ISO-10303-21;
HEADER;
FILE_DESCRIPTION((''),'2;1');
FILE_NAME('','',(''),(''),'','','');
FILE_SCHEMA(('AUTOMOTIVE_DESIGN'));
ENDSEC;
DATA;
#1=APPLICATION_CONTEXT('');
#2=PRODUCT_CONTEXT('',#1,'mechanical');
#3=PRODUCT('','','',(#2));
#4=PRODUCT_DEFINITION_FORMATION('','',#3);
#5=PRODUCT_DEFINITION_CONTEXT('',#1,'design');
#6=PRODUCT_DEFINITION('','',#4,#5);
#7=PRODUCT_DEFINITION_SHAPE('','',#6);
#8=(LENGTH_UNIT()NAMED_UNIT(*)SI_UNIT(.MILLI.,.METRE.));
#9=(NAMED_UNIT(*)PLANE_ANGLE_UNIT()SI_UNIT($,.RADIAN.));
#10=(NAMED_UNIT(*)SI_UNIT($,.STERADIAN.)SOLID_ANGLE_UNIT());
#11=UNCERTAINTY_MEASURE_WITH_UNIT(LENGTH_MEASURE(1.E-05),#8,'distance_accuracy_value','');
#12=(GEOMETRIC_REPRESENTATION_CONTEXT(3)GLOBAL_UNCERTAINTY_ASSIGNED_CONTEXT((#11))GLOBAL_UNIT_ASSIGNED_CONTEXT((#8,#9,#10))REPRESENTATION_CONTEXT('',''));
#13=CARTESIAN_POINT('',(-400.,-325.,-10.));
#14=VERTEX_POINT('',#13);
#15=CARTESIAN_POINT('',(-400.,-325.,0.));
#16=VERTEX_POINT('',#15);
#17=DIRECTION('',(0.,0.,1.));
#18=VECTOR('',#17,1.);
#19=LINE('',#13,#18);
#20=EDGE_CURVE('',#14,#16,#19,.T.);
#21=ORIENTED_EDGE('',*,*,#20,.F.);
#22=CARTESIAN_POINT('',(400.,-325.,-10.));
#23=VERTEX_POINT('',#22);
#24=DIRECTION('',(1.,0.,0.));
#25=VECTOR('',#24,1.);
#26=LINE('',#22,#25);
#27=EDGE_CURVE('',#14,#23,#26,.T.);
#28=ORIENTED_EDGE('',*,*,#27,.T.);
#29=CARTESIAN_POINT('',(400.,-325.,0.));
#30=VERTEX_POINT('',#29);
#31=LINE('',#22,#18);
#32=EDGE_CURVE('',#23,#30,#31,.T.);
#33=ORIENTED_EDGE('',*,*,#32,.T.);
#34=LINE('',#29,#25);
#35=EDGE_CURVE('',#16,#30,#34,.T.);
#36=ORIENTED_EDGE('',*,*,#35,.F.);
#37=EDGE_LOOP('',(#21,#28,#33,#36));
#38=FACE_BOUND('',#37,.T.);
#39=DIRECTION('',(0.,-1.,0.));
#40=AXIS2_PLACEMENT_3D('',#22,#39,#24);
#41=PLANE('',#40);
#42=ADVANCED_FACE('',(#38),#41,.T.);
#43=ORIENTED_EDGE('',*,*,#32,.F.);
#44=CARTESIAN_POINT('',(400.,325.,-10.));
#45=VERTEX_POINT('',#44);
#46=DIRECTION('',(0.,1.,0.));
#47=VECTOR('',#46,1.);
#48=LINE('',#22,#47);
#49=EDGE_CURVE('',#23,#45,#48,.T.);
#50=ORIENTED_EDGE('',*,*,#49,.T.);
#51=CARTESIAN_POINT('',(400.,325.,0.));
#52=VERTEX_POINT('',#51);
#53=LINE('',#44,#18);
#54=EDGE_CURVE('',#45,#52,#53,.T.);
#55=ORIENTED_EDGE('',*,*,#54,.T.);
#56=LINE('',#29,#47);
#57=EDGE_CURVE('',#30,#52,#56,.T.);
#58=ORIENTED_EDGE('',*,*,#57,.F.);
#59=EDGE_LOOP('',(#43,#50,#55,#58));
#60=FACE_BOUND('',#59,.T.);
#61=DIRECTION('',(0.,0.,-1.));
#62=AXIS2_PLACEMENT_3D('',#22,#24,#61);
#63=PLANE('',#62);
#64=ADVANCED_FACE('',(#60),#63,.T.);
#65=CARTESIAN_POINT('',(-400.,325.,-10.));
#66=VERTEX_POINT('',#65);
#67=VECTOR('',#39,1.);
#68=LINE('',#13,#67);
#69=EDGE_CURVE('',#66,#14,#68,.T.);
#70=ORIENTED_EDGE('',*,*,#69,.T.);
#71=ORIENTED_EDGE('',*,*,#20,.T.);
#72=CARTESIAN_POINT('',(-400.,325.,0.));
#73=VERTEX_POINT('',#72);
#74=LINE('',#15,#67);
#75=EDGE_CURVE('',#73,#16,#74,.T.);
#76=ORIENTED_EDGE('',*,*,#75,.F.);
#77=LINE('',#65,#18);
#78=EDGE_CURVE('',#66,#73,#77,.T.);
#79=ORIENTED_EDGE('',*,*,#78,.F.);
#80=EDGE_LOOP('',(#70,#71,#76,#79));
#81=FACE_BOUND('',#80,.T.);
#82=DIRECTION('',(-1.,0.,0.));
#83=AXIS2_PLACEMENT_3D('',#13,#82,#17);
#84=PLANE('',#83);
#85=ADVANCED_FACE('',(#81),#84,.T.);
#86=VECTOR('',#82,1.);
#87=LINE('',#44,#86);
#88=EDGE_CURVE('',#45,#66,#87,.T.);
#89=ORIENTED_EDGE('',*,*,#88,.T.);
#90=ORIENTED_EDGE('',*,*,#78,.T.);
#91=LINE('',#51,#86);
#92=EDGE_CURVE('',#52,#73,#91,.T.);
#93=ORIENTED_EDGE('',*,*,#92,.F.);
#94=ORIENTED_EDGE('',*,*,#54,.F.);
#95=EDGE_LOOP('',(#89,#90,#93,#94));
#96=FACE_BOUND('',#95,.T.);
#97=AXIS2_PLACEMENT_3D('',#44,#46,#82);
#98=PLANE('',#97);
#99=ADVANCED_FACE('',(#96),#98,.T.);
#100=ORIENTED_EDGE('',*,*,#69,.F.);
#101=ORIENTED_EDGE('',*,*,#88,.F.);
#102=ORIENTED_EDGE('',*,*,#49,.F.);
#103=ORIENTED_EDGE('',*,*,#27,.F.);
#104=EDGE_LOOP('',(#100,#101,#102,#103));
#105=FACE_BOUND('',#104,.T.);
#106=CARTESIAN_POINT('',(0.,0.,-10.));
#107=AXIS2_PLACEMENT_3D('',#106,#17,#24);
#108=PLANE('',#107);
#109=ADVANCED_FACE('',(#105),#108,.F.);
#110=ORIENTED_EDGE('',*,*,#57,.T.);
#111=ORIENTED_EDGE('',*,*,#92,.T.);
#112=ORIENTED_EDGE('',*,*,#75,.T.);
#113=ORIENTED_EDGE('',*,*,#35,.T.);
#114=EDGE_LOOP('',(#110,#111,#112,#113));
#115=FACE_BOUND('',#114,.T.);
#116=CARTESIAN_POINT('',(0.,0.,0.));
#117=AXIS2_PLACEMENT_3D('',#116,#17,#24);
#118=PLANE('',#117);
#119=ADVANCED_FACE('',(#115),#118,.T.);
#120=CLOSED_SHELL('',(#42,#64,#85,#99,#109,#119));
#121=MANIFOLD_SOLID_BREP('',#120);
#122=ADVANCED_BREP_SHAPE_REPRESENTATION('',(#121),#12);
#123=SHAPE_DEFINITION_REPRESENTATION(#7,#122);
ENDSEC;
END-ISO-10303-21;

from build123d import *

# Parameters (mm, degrees)
IZIM1_W            = 800
IZIM1_H            = 650
TABAN_FLAN_1_DEPTH = 10


# Sheet-metal steps are written as plain solids
with BuildPart() as part:
    # Çizim1 → Taban-Flanş1 (new body)
    with BuildSketch(Plane.XY):
        Rectangle(IZIM1_W, IZIM1_H)
    extrude(amount=-TABAN_FLAN_1_DEPTH)


solid = part.part
